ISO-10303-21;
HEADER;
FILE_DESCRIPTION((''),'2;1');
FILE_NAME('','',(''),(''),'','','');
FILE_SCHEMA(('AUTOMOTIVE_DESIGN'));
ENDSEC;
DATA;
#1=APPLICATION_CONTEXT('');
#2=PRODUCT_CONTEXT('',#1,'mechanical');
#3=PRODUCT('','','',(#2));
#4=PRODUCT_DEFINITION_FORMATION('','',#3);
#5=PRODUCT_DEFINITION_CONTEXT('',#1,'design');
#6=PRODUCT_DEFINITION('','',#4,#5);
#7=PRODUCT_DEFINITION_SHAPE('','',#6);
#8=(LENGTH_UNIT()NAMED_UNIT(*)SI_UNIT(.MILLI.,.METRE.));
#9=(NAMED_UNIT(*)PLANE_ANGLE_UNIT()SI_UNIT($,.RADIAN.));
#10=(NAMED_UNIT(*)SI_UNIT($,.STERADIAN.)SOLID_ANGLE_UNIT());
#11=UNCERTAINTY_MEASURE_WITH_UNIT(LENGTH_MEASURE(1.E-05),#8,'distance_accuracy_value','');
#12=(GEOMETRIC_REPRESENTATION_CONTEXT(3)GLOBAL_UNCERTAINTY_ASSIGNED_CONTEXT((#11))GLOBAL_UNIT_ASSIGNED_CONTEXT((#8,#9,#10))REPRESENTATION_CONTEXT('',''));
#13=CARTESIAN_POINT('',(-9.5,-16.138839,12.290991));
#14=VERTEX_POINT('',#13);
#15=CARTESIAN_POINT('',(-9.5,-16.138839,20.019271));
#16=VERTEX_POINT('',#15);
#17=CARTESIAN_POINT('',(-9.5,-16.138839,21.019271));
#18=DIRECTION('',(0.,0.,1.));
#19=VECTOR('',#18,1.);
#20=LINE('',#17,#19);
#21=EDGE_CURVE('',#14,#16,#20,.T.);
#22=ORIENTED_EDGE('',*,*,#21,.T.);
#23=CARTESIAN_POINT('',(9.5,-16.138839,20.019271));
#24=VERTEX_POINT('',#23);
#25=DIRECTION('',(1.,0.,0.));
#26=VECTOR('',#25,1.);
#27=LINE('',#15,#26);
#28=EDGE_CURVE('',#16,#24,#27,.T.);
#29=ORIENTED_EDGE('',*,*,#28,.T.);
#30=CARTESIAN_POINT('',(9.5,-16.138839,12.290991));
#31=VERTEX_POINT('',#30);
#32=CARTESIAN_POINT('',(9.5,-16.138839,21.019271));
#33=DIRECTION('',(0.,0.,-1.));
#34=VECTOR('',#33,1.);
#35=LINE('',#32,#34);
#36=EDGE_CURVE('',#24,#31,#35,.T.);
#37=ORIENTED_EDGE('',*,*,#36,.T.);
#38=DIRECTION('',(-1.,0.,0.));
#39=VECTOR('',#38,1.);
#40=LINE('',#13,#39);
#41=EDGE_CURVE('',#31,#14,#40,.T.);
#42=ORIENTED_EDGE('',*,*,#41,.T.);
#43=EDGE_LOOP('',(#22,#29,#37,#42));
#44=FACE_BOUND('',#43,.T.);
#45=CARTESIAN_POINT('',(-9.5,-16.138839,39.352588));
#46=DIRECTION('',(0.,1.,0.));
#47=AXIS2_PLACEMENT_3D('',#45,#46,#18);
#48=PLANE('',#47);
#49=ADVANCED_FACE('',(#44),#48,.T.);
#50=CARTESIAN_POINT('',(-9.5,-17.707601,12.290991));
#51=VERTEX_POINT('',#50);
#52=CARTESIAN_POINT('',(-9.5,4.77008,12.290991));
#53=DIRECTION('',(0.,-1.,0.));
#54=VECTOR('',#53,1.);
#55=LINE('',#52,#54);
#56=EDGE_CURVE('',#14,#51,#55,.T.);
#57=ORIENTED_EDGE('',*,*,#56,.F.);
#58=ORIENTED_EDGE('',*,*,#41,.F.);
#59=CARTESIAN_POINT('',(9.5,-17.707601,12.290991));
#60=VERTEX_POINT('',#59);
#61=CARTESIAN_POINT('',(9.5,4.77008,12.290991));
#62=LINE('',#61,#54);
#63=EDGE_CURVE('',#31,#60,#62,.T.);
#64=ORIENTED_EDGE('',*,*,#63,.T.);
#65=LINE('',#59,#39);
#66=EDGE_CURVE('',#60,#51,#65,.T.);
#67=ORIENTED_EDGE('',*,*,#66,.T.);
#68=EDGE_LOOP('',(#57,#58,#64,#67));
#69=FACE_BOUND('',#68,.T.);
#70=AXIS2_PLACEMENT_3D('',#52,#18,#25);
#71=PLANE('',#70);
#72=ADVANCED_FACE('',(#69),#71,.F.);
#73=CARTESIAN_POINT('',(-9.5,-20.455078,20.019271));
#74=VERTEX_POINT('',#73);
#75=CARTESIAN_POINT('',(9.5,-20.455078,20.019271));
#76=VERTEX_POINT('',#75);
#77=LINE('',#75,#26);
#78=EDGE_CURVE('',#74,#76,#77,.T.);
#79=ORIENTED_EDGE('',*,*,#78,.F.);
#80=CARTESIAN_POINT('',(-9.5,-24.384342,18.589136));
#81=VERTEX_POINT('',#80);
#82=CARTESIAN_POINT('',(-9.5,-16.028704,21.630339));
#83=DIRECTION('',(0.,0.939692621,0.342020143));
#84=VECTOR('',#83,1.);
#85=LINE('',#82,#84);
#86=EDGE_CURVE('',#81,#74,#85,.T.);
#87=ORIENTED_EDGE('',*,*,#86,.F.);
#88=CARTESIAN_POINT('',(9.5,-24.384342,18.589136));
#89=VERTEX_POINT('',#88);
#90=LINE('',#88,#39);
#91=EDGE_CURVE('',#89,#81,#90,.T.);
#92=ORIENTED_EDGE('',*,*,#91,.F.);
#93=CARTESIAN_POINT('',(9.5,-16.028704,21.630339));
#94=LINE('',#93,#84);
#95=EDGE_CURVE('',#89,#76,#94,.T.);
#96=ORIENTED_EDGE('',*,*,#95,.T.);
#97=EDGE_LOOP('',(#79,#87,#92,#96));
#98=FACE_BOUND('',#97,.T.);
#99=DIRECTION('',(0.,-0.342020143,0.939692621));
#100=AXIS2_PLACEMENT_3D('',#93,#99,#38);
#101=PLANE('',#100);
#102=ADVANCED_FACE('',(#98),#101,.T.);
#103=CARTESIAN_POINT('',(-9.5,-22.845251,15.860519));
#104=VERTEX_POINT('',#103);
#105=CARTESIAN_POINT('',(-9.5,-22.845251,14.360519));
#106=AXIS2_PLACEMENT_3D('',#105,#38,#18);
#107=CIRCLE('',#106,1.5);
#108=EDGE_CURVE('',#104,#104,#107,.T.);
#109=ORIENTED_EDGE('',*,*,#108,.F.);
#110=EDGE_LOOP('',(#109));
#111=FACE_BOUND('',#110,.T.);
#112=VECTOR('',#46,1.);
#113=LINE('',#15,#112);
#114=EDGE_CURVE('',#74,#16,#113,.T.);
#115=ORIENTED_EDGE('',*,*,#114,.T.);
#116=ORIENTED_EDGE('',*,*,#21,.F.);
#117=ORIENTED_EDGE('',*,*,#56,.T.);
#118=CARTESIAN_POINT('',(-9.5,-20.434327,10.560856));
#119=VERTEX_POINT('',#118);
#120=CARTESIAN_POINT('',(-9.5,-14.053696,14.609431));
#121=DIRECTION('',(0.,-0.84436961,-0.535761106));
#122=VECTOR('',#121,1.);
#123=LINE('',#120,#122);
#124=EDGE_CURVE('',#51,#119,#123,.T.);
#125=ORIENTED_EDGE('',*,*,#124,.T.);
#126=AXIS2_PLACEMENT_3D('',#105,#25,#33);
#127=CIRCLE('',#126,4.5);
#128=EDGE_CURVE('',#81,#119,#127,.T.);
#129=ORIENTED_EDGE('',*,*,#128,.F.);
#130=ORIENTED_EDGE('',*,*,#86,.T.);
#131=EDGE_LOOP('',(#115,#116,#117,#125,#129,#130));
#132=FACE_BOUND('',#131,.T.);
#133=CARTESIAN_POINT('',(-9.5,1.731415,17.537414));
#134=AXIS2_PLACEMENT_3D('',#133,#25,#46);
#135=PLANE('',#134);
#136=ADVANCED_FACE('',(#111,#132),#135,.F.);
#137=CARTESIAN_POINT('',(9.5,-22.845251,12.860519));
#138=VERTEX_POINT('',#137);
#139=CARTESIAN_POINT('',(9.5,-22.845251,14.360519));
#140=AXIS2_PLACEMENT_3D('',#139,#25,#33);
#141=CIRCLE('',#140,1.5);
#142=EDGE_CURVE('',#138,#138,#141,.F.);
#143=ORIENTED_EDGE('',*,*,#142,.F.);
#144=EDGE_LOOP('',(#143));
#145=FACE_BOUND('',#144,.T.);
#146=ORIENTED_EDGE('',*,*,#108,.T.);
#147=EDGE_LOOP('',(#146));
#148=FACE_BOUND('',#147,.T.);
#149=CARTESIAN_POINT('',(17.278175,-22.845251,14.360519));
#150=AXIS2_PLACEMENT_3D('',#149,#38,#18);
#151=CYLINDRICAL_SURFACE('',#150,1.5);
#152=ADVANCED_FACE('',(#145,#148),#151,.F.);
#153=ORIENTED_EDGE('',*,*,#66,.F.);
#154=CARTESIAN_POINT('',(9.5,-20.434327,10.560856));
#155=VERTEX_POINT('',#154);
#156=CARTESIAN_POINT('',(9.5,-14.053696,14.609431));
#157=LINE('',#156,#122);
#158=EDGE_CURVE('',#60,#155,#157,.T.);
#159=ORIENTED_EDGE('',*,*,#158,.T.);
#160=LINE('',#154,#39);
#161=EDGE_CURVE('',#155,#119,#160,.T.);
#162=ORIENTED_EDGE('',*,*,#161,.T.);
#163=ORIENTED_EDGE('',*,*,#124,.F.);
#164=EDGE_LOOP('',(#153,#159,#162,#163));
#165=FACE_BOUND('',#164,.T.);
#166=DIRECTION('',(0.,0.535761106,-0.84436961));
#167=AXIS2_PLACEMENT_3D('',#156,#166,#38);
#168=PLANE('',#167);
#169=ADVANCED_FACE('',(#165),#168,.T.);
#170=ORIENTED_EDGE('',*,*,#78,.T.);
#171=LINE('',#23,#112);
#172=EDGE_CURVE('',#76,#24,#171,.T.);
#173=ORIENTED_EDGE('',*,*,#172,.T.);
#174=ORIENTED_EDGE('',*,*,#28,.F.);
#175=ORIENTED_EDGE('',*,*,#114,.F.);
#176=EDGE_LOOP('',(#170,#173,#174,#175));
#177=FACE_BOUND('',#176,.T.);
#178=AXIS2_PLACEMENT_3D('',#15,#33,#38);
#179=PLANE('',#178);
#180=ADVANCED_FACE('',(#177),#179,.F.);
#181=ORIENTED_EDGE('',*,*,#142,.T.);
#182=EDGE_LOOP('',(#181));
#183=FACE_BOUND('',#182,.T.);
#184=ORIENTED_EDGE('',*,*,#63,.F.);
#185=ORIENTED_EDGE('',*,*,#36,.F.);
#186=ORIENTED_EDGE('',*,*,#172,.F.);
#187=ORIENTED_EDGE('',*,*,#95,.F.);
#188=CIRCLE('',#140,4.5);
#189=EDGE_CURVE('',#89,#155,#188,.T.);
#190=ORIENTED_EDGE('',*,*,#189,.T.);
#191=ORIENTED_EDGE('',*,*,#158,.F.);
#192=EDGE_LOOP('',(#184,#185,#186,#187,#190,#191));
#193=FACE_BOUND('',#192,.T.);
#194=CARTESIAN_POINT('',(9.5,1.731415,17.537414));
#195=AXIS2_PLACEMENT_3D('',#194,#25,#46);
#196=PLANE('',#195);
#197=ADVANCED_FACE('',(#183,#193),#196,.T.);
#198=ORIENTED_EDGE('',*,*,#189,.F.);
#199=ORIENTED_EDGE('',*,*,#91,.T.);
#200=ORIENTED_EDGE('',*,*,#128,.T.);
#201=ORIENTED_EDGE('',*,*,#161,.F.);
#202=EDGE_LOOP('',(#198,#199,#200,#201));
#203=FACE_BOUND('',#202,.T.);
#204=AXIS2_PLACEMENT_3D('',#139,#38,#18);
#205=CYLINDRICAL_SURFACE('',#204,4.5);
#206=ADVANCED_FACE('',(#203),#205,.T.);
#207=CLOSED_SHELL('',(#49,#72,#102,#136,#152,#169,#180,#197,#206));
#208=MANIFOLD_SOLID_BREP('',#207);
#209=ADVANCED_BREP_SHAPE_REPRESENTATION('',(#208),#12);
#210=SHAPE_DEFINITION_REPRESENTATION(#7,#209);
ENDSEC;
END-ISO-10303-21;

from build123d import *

# Parameters (mm, degrees)
BOSS_EXTRUDE1_START       = -0.8
BOSS_EXTRUDE1_OUTLINE_R   = 6
BOSS_EXTRUDE1_OUTLINE_R_2 = 2.5
BOSS_EXTRUDE1_DEPTH       = 1
BOSS_EXTRUDE1_START_2     = -9.5
BOSS_EXTRUDE1_2_OUTLINE_R = 2.75
BOSS_EXTRUDE1_2_DEPTH     = 19
BOSS_EXTRUDE1_START_3     = 20.214309477
BOSS_EXTRUDE1_3_OUTLINE_R = 1.25
BOSS_EXTRUDE1_3_DEPTH     = 5
SKETCH2_R                 = 6.25
CUT_EXTRUDE1_DEPTH        = 36.290497761
SKETCH3_R                 = 1.5
CUT_EXTRUDE2_DEPTH        = 10
SKETCH4_R                 = 2.75
SKETCH4_R_2               = 1.5
BOSS_EXTRUDE2_DEPTH       = 19
SKETCH5_W                 = 25.593794746
SKETCH5_H                 = 54.341869273
CUT_EXTRUDE3_DEPTH        = 45.112349032
SKETCH6_W                 = 19
SKETCH6_H                 = 8.728279904
BOSS_EXTRUDE3_DEPTH       = 1.568762114
SKETCH7_W                 = 4.505283746
SKETCH7_H                 = 5.968681608
CUT_EXTRUDE4_DEPTH        = 40.377309908


with BuildPart() as part:
    # Boss-Extrude1: read off the stored shape, not the designer's step
    # Boss-Extrude1 outline → Boss-Extrude1 (new body)
    with BuildSketch(Plane(origin=(0, 0, 24.414309477), x_dir=(-1, 0, 0), z_dir=(0, 0, -1)).offset(BOSS_EXTRUDE1_START)):
        with Locations((0, 13.101553709)):
            Circle(BOSS_EXTRUDE1_OUTLINE_R)
        with Locations((0, 13.101553709)):
            Circle(BOSS_EXTRUDE1_OUTLINE_R_2, mode=Mode.SUBTRACT)
    extrude(amount=BOSS_EXTRUDE1_DEPTH)

    # Boss-Extrude1 2 outline → Boss-Extrude1 2 (add)
    with BuildSketch(Plane.YZ.offset(BOSS_EXTRUDE1_START_2)):
        with BuildLine():
            Line((30.808082296, 25.214309477), (-4.594884555, 25.214309477))
            ThreePointArc((-4.594884555, 25.214309477), (-6.157718154, 25.077579254), (-7.673065845, 24.671543064))
            Line((-7.673065845, 24.671543064), (-24.384342131, 18.58913592))
            ThreePointArc((-24.384342131, 18.58913592), (-26.882991431, 12.373899853), (-20.43432651, 10.560855883))
            Line((-20.43432651, 10.560855883), (-7.673065845, 18.658005573))
            ThreePointArc((-7.673065845, 18.658005573), (-5.104992299, 19.817354852), (-2.315454789, 20.214309477))
            Line((-2.315454789, 20.214309477), (30.808082296, 20.214309477))
            Line((30.808082296, 20.214309477), (30.808082296, 25.214309477))
        make_face()
        with Locations((-22.845251486, 14.360519126)):
            Circle(BOSS_EXTRUDE1_2_OUTLINE_R, mode=Mode.SUBTRACT)
    extrude(amount=BOSS_EXTRUDE1_2_DEPTH)

    # Boss-Extrude1 3 outline → Boss-Extrude1 3 (cut)
    with BuildSketch(Plane.XY.offset(BOSS_EXTRUDE1_START_3)):
        with BuildLine():
            ThreePointArc((-9.5, 25.808082296), (-8.035533906, 29.343616202), (-4.5, 30.808082296))
            Line((-4.5, 30.808082296), (-9.5, 30.808082296))
            Line((-9.5, 30.808082296), (-9.5, 25.808082296))
        make_face()
        with BuildLine():
            Line((9.5, 30.808082296), (4.5, 30.808082296))
            ThreePointArc((4.5, 30.808082296), (8.035533906, 29.343616202), (9.5, 25.808082296))
            Line((9.5, 25.808082296), (9.5, 30.808082296))
        make_face()
        with Locations((5, 26.808082296)):
            Circle(BOSS_EXTRUDE1_3_OUTLINE_R)
        with Locations((-5, 26.808082296)):
            Circle(BOSS_EXTRUDE1_3_OUTLINE_R)
    extrude(amount=BOSS_EXTRUDE1_3_DEPTH, mode=Mode.SUBTRACT)

    # Boss-Extrude1 4 outline → Boss-Extrude1 4 (revolve, cut)
    with BuildSketch(Plane.XZ.offset(-13.101553709)):
        Polygon((6, 20.714309477), (6, 24.214309477), (2.5, 24.214309477), (2.5, 25.214309477), (0, 25.214309477), (0, 20.214309477), (6.5, 20.214309477), align=None)
    revolve(axis=Axis((0, 13.101553709, 0), (0, 0, 1)), mode=Mode.SUBTRACT)

    # Sketch2 → Cut-Extrude1 (cut, through all)
    with BuildSketch(Plane(origin=(0, 0, 24.214309477), x_dir=(-1, 0, 0), z_dir=(0, 0, -1))):
        with Locations((0, 13.101553709)):
            Circle(SKETCH2_R)
    extrude(amount=CUT_EXTRUDE1_DEPTH, mode=Mode.SUBTRACT)

    # Sketch3 → Cut-Extrude2 (cut)
    with BuildSketch(Plane.XY.offset(25.214309477)):
        with Locations((-5, 26.808082296)):
            Circle(SKETCH3_R)
        with Locations((5, 26.808082296)):
            Circle(SKETCH3_R)
    extrude(amount=-CUT_EXTRUDE2_DEPTH, mode=Mode.SUBTRACT)

    # Sketch4 → Boss-Extrude2 (add)
    with BuildSketch(Plane.ZY.offset(9.5)):
        with Locations((14.360519126, -22.845251486)):
            Circle(SKETCH4_R)
        with Locations((14.360519126, -22.845251486)):
            Circle(SKETCH4_R_2, mode=Mode.SUBTRACT)
    extrude(amount=-BOSS_EXTRUDE2_DEPTH)

    # Sketch5 → Cut-Extrude3 (cut, through all)
    with BuildSketch(Plane(origin=(9.5, 0, 0), x_dir=(0, 0, -1), z_dir=(1, 0, 0))):
        with Locations((-21.9386431, 9.463333989)):
            Rectangle(SKETCH5_W, SKETCH5_H)
    extrude(amount=-CUT_EXTRUDE3_DEPTH, mode=Mode.SUBTRACT)

    # Sketch6 → Boss-Extrude3 (add)
    with BuildSketch(Plane(origin=(0, -17.707600648, 0), x_dir=(1, 0, 0), z_dir=(0, 1, 0))):
        with Locations((0, -16.655131129)):
            Rectangle(SKETCH6_W, SKETCH6_H)
    extrude(amount=BOSS_EXTRUDE3_DEPTH)

    # Sketch7 → Cut-Extrude4 (cut, through all)
    with BuildSketch(Plane(origin=(9.5, 0, 0), x_dir=(0, 0, -1), z_dir=(1, 0, 0))):
        with Locations((-22.271912954, -19.123179338)):
            Rectangle(SKETCH7_W, SKETCH7_H)
    extrude(amount=-CUT_EXTRUDE4_DEPTH, mode=Mode.SUBTRACT)


solid = part.part
